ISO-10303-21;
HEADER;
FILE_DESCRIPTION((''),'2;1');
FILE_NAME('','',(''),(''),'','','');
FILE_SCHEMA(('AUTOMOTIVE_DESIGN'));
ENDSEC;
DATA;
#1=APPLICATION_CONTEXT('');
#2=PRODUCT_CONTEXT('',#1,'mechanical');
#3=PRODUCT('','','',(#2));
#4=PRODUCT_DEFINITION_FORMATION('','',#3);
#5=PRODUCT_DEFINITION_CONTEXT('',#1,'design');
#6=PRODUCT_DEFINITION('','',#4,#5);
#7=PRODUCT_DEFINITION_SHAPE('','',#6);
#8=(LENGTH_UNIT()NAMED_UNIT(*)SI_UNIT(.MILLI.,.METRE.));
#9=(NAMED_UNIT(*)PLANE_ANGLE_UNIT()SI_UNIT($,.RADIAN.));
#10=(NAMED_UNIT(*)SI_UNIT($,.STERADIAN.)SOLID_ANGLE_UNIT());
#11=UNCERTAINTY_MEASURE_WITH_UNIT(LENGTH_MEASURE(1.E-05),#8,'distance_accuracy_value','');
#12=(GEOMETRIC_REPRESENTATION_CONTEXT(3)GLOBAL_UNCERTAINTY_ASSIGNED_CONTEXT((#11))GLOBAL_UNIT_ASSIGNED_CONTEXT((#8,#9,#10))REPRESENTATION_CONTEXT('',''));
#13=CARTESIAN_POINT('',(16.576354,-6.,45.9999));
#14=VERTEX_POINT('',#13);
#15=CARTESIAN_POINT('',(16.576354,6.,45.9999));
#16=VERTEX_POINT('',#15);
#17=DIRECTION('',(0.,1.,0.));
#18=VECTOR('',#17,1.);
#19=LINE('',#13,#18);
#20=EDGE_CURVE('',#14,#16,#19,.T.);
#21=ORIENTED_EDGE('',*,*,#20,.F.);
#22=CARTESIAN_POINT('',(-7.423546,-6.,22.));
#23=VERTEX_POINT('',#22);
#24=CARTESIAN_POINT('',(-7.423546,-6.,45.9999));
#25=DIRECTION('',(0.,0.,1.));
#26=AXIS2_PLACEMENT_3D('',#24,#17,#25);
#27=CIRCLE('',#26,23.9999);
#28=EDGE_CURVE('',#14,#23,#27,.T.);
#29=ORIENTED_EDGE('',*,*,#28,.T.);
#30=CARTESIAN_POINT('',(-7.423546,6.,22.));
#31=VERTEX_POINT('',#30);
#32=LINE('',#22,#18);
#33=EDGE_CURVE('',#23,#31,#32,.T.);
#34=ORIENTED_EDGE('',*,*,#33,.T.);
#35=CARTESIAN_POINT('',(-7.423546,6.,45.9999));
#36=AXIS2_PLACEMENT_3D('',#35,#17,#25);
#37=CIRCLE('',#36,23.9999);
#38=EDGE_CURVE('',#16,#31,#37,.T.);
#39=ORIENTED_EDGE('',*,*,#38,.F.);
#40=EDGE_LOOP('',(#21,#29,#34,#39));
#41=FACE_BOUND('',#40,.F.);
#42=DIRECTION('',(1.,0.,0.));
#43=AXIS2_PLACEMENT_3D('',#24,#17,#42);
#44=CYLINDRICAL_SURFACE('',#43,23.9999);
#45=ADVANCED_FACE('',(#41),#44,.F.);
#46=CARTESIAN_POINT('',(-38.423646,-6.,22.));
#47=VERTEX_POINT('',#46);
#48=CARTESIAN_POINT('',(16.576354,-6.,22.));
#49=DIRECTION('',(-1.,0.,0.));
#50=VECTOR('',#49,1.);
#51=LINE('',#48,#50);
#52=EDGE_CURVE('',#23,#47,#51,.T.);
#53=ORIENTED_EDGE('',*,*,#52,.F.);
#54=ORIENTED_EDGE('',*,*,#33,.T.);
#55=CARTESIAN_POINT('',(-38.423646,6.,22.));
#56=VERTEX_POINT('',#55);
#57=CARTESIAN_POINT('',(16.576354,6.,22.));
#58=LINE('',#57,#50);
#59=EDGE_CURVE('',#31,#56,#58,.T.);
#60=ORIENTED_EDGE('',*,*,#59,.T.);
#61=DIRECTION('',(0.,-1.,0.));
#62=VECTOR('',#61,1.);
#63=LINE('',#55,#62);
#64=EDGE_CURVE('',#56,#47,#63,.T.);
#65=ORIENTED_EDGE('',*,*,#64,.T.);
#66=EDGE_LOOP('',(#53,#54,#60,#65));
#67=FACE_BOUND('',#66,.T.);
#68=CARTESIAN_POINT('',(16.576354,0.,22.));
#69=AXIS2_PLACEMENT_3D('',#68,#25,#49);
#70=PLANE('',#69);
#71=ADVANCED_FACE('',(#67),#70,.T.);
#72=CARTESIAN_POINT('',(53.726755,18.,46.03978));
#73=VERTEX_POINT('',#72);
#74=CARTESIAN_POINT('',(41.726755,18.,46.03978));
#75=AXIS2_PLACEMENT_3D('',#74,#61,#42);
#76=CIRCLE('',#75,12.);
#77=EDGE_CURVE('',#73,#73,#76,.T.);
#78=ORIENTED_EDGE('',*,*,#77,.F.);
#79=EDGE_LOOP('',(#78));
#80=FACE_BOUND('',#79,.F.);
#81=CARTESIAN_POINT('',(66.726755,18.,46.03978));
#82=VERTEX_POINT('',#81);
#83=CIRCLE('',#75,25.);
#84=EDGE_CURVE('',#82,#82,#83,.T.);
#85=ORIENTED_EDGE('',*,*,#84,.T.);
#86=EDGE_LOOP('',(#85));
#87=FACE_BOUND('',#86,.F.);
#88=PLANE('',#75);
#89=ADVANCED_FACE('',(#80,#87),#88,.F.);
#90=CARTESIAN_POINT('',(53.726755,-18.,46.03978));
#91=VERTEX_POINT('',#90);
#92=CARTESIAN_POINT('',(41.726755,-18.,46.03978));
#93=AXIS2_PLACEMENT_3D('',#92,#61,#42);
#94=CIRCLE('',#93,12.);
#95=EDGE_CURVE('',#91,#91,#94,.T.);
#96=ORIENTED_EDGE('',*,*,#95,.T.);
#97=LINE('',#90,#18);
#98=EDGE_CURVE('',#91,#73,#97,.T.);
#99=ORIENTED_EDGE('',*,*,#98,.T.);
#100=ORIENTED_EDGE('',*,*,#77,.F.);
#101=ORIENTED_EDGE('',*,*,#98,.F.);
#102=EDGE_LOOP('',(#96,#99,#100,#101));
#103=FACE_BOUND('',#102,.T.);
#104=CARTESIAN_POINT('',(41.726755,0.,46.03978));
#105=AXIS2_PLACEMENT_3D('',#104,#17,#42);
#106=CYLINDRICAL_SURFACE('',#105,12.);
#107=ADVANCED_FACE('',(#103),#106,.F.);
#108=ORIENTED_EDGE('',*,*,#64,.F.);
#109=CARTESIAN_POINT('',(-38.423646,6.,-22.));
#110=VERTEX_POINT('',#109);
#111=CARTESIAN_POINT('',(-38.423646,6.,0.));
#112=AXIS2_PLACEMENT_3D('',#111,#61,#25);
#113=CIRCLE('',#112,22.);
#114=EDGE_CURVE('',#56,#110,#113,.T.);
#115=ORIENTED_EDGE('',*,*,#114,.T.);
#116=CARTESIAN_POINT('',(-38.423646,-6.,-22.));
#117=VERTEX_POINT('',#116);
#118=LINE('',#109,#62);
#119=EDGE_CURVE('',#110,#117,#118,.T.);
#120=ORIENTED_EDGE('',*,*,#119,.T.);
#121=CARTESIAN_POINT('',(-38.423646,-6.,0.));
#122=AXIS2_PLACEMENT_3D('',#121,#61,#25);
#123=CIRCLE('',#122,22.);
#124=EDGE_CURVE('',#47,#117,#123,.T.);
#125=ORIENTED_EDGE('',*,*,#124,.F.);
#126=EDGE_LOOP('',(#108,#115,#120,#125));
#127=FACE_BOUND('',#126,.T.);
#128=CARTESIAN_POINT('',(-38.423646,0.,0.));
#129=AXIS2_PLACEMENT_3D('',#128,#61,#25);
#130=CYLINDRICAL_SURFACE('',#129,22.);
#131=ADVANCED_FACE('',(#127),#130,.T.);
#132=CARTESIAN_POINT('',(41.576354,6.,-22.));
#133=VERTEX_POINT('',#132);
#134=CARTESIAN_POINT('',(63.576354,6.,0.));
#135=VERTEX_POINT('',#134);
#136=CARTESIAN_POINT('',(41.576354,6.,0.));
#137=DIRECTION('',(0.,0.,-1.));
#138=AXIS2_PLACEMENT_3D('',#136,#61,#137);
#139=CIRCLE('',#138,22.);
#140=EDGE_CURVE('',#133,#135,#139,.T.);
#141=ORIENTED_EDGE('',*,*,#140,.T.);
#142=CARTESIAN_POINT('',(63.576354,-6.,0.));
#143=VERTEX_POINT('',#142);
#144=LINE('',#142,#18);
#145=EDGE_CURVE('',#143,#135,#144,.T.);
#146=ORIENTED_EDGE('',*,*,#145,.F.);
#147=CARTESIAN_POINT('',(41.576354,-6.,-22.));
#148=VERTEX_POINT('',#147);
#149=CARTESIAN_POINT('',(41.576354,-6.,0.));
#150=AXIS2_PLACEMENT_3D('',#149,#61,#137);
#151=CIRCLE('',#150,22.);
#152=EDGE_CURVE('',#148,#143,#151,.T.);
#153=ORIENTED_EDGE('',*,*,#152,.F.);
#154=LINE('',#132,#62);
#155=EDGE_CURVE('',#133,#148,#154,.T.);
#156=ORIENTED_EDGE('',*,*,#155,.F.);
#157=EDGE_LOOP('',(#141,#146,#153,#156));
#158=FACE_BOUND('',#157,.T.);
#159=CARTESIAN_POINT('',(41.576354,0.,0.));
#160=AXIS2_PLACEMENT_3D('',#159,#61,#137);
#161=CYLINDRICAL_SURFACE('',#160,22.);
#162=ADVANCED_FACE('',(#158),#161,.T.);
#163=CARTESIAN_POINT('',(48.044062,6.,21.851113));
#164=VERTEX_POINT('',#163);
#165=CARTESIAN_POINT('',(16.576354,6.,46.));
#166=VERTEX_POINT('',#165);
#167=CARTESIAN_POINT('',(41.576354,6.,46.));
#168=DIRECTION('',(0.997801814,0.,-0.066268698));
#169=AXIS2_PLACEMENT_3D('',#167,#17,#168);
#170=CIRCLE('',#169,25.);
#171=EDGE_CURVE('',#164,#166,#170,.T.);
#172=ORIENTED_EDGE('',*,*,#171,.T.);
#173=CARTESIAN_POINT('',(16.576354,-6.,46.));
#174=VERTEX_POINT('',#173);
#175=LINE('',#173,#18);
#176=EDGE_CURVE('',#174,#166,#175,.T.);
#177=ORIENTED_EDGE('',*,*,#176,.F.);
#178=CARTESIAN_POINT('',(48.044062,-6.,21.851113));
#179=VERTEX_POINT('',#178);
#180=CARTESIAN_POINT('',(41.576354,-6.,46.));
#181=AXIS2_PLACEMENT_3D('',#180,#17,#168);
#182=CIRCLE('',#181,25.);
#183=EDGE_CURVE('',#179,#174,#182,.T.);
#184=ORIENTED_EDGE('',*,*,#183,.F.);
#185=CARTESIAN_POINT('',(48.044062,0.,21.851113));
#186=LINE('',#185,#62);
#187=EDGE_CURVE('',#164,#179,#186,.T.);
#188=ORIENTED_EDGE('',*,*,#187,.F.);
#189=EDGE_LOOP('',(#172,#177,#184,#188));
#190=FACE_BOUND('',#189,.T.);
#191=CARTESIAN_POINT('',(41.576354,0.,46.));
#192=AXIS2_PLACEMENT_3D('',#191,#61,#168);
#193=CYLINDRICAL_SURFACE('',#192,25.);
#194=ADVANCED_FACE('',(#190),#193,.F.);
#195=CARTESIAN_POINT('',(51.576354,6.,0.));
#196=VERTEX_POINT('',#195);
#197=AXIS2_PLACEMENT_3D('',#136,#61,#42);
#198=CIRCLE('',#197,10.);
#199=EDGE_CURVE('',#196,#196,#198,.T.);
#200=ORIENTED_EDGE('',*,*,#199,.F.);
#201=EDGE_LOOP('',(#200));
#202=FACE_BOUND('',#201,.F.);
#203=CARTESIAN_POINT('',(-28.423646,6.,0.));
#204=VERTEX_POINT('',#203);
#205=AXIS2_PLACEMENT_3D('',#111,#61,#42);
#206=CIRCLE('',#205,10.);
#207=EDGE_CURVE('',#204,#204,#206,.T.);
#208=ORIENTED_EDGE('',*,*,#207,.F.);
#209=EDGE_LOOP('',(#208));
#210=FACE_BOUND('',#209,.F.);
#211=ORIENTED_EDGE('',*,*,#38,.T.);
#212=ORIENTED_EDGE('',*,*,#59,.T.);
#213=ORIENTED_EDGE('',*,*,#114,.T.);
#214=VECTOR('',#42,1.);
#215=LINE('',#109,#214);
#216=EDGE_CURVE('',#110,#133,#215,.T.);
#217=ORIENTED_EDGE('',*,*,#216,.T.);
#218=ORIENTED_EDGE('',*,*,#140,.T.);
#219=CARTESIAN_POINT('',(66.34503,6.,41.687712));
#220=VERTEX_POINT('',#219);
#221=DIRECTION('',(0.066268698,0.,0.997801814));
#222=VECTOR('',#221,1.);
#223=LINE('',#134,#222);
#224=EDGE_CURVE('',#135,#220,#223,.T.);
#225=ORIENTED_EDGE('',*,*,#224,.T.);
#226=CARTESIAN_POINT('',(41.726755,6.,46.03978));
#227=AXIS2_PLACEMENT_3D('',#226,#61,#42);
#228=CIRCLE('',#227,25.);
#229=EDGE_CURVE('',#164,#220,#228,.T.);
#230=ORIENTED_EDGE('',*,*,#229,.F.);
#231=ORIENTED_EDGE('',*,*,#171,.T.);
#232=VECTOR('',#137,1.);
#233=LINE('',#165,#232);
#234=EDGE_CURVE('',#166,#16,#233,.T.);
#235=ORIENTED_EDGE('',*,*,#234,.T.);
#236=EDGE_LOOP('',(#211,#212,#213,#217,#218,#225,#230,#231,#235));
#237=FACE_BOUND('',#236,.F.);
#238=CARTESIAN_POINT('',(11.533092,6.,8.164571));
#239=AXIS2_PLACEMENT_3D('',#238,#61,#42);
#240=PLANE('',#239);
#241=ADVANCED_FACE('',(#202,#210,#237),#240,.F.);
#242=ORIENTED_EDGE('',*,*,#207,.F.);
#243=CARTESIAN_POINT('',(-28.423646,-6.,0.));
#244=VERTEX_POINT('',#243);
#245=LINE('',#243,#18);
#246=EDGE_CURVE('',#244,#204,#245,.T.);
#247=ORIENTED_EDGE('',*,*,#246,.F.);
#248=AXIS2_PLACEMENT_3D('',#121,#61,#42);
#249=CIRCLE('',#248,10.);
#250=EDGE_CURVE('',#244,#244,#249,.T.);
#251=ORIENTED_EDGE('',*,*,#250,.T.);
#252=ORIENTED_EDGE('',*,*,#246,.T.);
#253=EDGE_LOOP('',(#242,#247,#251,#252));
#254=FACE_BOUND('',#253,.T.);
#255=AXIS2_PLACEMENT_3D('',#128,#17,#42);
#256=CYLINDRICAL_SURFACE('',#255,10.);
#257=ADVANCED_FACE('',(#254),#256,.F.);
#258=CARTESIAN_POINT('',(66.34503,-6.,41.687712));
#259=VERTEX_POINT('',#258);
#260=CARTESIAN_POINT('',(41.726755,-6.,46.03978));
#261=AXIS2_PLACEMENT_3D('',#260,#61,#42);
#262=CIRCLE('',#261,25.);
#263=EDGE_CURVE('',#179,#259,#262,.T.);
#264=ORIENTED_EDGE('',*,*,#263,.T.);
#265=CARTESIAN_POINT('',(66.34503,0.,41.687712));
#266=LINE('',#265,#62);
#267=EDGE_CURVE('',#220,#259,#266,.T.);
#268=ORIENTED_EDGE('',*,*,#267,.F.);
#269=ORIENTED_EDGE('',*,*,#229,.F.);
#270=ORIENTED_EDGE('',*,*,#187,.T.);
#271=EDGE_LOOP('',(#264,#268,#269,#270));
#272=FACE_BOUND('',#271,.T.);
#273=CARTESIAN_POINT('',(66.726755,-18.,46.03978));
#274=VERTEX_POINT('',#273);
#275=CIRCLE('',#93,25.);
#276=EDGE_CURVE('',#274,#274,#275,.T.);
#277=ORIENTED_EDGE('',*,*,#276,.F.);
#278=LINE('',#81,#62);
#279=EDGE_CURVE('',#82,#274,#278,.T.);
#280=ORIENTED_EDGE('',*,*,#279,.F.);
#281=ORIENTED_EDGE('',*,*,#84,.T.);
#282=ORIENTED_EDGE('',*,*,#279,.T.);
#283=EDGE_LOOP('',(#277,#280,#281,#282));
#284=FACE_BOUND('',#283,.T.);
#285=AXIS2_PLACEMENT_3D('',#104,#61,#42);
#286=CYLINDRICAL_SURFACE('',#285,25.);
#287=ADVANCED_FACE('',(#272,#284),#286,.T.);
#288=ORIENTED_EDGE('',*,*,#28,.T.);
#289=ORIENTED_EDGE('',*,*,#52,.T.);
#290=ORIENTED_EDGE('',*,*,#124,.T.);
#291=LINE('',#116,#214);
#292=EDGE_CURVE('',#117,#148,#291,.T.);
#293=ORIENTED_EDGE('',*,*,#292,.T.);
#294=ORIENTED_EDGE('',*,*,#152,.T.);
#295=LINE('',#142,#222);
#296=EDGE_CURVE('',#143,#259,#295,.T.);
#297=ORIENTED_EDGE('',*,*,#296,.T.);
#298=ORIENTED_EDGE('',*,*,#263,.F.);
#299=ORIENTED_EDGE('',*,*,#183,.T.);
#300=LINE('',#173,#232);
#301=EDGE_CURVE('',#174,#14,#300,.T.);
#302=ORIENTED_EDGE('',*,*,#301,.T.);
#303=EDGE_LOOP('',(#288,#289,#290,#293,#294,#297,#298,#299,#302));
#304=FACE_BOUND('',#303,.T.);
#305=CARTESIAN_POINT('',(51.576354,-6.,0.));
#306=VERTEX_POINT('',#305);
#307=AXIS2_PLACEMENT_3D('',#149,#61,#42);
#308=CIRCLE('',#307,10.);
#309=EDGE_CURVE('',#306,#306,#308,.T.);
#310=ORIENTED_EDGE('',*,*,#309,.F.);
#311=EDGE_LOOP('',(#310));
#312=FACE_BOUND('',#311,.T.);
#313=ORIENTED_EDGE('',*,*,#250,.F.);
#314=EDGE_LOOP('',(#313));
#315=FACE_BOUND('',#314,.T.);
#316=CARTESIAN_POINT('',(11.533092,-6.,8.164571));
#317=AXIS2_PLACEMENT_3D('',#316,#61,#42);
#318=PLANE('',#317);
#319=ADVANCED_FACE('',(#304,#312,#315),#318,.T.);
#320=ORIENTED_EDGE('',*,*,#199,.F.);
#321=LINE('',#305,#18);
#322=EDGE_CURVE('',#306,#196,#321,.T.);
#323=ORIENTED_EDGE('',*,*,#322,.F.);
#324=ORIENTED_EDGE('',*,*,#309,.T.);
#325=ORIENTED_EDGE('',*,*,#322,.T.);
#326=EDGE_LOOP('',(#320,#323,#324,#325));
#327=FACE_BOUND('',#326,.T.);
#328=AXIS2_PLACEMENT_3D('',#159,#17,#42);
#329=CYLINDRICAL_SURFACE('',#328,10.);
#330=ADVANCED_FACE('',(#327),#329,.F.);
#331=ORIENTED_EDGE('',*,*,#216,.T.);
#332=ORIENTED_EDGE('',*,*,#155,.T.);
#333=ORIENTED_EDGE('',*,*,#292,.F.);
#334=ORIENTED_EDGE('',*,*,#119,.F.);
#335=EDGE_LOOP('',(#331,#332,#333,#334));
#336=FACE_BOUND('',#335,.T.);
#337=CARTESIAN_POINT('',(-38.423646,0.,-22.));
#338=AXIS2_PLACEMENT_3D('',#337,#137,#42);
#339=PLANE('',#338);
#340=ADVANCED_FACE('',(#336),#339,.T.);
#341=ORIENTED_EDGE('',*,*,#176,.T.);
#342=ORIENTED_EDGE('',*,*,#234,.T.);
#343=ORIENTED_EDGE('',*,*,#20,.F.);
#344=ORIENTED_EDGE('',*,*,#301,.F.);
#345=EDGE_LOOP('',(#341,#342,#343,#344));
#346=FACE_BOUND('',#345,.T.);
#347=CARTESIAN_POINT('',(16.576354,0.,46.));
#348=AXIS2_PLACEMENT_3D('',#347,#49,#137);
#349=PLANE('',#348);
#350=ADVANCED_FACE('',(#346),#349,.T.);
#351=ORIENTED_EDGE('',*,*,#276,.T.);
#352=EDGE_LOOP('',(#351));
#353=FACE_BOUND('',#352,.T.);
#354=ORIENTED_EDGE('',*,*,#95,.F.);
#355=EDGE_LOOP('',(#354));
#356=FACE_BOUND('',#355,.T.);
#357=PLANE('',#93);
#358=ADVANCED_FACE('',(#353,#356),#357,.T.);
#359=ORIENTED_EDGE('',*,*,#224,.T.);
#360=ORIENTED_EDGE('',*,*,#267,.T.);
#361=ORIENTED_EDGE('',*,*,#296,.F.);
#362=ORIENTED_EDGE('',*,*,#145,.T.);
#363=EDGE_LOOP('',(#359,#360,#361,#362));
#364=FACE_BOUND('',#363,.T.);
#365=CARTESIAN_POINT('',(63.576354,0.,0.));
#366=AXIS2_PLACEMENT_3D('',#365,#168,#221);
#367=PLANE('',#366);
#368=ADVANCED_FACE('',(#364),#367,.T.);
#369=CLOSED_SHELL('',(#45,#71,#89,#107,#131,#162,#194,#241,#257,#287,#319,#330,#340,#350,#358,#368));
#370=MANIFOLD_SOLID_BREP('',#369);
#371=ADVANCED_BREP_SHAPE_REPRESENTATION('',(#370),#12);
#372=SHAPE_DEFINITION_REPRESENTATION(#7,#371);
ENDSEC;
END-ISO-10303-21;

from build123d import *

# Parameters (mm, degrees)
F0_R     = 10
F1_DEPTH = 6
F2_R     = 25
F2_R_2   = 12
F3_DEPTH = 18
F4_R     = 23.9999


# Not quite as in the source:
# - a fillet or chamfer is up to 0.001 mm smaller than in the source, because OpenCascade refuses the exact size


with BuildPart() as f1:
    # F0 (on Front) → F1 (new body, symmetric)
    with BuildSketch(Plane.XZ):
        with BuildLine():
            Line((16.57635398, 22), (-38.42364602, 22))
            ThreePointArc((-38.42364602, 22), (-60.42364602, 0), (-38.42364602, -22))
            Line((-38.42364602, -22), (41.57635398, -22))
            ThreePointArc((41.57635398, -22), (57.1327031661, -15.5563491861), (63.57635398, 0))
            Line((63.57635398, 0), (66.521399326, 44.3432825568))
            ThreePointArc((66.521399326, 44.3432825568), (40.7475396611, 21.0137424406), (16.57635398, 46))
            Line((16.57635398, 46), (16.57635398, 22))
        make_face()
        with Locations((-38.42364602, 0)):
            Circle(F0_R, mode=Mode.SUBTRACT)
        with Locations((41.57635398, 0)):
            Circle(F0_R, mode=Mode.SUBTRACT)
    extrude(amount=F1_DEPTH, both=True)

    # F2 (on Front) → F3 (join, symmetric)
    with BuildSketch(Plane.XZ):
        with Locations((41.726754687, 46.0397801568)):
            Circle(F2_R)
        with Locations((41.726754687, 46.0397801568)):
            Circle(F2_R_2, mode=Mode.SUBTRACT)
    extrude(amount=F3_DEPTH, both=True)

    # F4 (radius 24 in the source; OpenCascade refuses exactly that, so slightly less here)
    f4_edges = [f1.edges().sort_by_distance(p)[0] for p in [
        (16.576354, 0, 22),
    ]]
    fillet(f4_edges, radius=F4_R)


solid = f1.part
